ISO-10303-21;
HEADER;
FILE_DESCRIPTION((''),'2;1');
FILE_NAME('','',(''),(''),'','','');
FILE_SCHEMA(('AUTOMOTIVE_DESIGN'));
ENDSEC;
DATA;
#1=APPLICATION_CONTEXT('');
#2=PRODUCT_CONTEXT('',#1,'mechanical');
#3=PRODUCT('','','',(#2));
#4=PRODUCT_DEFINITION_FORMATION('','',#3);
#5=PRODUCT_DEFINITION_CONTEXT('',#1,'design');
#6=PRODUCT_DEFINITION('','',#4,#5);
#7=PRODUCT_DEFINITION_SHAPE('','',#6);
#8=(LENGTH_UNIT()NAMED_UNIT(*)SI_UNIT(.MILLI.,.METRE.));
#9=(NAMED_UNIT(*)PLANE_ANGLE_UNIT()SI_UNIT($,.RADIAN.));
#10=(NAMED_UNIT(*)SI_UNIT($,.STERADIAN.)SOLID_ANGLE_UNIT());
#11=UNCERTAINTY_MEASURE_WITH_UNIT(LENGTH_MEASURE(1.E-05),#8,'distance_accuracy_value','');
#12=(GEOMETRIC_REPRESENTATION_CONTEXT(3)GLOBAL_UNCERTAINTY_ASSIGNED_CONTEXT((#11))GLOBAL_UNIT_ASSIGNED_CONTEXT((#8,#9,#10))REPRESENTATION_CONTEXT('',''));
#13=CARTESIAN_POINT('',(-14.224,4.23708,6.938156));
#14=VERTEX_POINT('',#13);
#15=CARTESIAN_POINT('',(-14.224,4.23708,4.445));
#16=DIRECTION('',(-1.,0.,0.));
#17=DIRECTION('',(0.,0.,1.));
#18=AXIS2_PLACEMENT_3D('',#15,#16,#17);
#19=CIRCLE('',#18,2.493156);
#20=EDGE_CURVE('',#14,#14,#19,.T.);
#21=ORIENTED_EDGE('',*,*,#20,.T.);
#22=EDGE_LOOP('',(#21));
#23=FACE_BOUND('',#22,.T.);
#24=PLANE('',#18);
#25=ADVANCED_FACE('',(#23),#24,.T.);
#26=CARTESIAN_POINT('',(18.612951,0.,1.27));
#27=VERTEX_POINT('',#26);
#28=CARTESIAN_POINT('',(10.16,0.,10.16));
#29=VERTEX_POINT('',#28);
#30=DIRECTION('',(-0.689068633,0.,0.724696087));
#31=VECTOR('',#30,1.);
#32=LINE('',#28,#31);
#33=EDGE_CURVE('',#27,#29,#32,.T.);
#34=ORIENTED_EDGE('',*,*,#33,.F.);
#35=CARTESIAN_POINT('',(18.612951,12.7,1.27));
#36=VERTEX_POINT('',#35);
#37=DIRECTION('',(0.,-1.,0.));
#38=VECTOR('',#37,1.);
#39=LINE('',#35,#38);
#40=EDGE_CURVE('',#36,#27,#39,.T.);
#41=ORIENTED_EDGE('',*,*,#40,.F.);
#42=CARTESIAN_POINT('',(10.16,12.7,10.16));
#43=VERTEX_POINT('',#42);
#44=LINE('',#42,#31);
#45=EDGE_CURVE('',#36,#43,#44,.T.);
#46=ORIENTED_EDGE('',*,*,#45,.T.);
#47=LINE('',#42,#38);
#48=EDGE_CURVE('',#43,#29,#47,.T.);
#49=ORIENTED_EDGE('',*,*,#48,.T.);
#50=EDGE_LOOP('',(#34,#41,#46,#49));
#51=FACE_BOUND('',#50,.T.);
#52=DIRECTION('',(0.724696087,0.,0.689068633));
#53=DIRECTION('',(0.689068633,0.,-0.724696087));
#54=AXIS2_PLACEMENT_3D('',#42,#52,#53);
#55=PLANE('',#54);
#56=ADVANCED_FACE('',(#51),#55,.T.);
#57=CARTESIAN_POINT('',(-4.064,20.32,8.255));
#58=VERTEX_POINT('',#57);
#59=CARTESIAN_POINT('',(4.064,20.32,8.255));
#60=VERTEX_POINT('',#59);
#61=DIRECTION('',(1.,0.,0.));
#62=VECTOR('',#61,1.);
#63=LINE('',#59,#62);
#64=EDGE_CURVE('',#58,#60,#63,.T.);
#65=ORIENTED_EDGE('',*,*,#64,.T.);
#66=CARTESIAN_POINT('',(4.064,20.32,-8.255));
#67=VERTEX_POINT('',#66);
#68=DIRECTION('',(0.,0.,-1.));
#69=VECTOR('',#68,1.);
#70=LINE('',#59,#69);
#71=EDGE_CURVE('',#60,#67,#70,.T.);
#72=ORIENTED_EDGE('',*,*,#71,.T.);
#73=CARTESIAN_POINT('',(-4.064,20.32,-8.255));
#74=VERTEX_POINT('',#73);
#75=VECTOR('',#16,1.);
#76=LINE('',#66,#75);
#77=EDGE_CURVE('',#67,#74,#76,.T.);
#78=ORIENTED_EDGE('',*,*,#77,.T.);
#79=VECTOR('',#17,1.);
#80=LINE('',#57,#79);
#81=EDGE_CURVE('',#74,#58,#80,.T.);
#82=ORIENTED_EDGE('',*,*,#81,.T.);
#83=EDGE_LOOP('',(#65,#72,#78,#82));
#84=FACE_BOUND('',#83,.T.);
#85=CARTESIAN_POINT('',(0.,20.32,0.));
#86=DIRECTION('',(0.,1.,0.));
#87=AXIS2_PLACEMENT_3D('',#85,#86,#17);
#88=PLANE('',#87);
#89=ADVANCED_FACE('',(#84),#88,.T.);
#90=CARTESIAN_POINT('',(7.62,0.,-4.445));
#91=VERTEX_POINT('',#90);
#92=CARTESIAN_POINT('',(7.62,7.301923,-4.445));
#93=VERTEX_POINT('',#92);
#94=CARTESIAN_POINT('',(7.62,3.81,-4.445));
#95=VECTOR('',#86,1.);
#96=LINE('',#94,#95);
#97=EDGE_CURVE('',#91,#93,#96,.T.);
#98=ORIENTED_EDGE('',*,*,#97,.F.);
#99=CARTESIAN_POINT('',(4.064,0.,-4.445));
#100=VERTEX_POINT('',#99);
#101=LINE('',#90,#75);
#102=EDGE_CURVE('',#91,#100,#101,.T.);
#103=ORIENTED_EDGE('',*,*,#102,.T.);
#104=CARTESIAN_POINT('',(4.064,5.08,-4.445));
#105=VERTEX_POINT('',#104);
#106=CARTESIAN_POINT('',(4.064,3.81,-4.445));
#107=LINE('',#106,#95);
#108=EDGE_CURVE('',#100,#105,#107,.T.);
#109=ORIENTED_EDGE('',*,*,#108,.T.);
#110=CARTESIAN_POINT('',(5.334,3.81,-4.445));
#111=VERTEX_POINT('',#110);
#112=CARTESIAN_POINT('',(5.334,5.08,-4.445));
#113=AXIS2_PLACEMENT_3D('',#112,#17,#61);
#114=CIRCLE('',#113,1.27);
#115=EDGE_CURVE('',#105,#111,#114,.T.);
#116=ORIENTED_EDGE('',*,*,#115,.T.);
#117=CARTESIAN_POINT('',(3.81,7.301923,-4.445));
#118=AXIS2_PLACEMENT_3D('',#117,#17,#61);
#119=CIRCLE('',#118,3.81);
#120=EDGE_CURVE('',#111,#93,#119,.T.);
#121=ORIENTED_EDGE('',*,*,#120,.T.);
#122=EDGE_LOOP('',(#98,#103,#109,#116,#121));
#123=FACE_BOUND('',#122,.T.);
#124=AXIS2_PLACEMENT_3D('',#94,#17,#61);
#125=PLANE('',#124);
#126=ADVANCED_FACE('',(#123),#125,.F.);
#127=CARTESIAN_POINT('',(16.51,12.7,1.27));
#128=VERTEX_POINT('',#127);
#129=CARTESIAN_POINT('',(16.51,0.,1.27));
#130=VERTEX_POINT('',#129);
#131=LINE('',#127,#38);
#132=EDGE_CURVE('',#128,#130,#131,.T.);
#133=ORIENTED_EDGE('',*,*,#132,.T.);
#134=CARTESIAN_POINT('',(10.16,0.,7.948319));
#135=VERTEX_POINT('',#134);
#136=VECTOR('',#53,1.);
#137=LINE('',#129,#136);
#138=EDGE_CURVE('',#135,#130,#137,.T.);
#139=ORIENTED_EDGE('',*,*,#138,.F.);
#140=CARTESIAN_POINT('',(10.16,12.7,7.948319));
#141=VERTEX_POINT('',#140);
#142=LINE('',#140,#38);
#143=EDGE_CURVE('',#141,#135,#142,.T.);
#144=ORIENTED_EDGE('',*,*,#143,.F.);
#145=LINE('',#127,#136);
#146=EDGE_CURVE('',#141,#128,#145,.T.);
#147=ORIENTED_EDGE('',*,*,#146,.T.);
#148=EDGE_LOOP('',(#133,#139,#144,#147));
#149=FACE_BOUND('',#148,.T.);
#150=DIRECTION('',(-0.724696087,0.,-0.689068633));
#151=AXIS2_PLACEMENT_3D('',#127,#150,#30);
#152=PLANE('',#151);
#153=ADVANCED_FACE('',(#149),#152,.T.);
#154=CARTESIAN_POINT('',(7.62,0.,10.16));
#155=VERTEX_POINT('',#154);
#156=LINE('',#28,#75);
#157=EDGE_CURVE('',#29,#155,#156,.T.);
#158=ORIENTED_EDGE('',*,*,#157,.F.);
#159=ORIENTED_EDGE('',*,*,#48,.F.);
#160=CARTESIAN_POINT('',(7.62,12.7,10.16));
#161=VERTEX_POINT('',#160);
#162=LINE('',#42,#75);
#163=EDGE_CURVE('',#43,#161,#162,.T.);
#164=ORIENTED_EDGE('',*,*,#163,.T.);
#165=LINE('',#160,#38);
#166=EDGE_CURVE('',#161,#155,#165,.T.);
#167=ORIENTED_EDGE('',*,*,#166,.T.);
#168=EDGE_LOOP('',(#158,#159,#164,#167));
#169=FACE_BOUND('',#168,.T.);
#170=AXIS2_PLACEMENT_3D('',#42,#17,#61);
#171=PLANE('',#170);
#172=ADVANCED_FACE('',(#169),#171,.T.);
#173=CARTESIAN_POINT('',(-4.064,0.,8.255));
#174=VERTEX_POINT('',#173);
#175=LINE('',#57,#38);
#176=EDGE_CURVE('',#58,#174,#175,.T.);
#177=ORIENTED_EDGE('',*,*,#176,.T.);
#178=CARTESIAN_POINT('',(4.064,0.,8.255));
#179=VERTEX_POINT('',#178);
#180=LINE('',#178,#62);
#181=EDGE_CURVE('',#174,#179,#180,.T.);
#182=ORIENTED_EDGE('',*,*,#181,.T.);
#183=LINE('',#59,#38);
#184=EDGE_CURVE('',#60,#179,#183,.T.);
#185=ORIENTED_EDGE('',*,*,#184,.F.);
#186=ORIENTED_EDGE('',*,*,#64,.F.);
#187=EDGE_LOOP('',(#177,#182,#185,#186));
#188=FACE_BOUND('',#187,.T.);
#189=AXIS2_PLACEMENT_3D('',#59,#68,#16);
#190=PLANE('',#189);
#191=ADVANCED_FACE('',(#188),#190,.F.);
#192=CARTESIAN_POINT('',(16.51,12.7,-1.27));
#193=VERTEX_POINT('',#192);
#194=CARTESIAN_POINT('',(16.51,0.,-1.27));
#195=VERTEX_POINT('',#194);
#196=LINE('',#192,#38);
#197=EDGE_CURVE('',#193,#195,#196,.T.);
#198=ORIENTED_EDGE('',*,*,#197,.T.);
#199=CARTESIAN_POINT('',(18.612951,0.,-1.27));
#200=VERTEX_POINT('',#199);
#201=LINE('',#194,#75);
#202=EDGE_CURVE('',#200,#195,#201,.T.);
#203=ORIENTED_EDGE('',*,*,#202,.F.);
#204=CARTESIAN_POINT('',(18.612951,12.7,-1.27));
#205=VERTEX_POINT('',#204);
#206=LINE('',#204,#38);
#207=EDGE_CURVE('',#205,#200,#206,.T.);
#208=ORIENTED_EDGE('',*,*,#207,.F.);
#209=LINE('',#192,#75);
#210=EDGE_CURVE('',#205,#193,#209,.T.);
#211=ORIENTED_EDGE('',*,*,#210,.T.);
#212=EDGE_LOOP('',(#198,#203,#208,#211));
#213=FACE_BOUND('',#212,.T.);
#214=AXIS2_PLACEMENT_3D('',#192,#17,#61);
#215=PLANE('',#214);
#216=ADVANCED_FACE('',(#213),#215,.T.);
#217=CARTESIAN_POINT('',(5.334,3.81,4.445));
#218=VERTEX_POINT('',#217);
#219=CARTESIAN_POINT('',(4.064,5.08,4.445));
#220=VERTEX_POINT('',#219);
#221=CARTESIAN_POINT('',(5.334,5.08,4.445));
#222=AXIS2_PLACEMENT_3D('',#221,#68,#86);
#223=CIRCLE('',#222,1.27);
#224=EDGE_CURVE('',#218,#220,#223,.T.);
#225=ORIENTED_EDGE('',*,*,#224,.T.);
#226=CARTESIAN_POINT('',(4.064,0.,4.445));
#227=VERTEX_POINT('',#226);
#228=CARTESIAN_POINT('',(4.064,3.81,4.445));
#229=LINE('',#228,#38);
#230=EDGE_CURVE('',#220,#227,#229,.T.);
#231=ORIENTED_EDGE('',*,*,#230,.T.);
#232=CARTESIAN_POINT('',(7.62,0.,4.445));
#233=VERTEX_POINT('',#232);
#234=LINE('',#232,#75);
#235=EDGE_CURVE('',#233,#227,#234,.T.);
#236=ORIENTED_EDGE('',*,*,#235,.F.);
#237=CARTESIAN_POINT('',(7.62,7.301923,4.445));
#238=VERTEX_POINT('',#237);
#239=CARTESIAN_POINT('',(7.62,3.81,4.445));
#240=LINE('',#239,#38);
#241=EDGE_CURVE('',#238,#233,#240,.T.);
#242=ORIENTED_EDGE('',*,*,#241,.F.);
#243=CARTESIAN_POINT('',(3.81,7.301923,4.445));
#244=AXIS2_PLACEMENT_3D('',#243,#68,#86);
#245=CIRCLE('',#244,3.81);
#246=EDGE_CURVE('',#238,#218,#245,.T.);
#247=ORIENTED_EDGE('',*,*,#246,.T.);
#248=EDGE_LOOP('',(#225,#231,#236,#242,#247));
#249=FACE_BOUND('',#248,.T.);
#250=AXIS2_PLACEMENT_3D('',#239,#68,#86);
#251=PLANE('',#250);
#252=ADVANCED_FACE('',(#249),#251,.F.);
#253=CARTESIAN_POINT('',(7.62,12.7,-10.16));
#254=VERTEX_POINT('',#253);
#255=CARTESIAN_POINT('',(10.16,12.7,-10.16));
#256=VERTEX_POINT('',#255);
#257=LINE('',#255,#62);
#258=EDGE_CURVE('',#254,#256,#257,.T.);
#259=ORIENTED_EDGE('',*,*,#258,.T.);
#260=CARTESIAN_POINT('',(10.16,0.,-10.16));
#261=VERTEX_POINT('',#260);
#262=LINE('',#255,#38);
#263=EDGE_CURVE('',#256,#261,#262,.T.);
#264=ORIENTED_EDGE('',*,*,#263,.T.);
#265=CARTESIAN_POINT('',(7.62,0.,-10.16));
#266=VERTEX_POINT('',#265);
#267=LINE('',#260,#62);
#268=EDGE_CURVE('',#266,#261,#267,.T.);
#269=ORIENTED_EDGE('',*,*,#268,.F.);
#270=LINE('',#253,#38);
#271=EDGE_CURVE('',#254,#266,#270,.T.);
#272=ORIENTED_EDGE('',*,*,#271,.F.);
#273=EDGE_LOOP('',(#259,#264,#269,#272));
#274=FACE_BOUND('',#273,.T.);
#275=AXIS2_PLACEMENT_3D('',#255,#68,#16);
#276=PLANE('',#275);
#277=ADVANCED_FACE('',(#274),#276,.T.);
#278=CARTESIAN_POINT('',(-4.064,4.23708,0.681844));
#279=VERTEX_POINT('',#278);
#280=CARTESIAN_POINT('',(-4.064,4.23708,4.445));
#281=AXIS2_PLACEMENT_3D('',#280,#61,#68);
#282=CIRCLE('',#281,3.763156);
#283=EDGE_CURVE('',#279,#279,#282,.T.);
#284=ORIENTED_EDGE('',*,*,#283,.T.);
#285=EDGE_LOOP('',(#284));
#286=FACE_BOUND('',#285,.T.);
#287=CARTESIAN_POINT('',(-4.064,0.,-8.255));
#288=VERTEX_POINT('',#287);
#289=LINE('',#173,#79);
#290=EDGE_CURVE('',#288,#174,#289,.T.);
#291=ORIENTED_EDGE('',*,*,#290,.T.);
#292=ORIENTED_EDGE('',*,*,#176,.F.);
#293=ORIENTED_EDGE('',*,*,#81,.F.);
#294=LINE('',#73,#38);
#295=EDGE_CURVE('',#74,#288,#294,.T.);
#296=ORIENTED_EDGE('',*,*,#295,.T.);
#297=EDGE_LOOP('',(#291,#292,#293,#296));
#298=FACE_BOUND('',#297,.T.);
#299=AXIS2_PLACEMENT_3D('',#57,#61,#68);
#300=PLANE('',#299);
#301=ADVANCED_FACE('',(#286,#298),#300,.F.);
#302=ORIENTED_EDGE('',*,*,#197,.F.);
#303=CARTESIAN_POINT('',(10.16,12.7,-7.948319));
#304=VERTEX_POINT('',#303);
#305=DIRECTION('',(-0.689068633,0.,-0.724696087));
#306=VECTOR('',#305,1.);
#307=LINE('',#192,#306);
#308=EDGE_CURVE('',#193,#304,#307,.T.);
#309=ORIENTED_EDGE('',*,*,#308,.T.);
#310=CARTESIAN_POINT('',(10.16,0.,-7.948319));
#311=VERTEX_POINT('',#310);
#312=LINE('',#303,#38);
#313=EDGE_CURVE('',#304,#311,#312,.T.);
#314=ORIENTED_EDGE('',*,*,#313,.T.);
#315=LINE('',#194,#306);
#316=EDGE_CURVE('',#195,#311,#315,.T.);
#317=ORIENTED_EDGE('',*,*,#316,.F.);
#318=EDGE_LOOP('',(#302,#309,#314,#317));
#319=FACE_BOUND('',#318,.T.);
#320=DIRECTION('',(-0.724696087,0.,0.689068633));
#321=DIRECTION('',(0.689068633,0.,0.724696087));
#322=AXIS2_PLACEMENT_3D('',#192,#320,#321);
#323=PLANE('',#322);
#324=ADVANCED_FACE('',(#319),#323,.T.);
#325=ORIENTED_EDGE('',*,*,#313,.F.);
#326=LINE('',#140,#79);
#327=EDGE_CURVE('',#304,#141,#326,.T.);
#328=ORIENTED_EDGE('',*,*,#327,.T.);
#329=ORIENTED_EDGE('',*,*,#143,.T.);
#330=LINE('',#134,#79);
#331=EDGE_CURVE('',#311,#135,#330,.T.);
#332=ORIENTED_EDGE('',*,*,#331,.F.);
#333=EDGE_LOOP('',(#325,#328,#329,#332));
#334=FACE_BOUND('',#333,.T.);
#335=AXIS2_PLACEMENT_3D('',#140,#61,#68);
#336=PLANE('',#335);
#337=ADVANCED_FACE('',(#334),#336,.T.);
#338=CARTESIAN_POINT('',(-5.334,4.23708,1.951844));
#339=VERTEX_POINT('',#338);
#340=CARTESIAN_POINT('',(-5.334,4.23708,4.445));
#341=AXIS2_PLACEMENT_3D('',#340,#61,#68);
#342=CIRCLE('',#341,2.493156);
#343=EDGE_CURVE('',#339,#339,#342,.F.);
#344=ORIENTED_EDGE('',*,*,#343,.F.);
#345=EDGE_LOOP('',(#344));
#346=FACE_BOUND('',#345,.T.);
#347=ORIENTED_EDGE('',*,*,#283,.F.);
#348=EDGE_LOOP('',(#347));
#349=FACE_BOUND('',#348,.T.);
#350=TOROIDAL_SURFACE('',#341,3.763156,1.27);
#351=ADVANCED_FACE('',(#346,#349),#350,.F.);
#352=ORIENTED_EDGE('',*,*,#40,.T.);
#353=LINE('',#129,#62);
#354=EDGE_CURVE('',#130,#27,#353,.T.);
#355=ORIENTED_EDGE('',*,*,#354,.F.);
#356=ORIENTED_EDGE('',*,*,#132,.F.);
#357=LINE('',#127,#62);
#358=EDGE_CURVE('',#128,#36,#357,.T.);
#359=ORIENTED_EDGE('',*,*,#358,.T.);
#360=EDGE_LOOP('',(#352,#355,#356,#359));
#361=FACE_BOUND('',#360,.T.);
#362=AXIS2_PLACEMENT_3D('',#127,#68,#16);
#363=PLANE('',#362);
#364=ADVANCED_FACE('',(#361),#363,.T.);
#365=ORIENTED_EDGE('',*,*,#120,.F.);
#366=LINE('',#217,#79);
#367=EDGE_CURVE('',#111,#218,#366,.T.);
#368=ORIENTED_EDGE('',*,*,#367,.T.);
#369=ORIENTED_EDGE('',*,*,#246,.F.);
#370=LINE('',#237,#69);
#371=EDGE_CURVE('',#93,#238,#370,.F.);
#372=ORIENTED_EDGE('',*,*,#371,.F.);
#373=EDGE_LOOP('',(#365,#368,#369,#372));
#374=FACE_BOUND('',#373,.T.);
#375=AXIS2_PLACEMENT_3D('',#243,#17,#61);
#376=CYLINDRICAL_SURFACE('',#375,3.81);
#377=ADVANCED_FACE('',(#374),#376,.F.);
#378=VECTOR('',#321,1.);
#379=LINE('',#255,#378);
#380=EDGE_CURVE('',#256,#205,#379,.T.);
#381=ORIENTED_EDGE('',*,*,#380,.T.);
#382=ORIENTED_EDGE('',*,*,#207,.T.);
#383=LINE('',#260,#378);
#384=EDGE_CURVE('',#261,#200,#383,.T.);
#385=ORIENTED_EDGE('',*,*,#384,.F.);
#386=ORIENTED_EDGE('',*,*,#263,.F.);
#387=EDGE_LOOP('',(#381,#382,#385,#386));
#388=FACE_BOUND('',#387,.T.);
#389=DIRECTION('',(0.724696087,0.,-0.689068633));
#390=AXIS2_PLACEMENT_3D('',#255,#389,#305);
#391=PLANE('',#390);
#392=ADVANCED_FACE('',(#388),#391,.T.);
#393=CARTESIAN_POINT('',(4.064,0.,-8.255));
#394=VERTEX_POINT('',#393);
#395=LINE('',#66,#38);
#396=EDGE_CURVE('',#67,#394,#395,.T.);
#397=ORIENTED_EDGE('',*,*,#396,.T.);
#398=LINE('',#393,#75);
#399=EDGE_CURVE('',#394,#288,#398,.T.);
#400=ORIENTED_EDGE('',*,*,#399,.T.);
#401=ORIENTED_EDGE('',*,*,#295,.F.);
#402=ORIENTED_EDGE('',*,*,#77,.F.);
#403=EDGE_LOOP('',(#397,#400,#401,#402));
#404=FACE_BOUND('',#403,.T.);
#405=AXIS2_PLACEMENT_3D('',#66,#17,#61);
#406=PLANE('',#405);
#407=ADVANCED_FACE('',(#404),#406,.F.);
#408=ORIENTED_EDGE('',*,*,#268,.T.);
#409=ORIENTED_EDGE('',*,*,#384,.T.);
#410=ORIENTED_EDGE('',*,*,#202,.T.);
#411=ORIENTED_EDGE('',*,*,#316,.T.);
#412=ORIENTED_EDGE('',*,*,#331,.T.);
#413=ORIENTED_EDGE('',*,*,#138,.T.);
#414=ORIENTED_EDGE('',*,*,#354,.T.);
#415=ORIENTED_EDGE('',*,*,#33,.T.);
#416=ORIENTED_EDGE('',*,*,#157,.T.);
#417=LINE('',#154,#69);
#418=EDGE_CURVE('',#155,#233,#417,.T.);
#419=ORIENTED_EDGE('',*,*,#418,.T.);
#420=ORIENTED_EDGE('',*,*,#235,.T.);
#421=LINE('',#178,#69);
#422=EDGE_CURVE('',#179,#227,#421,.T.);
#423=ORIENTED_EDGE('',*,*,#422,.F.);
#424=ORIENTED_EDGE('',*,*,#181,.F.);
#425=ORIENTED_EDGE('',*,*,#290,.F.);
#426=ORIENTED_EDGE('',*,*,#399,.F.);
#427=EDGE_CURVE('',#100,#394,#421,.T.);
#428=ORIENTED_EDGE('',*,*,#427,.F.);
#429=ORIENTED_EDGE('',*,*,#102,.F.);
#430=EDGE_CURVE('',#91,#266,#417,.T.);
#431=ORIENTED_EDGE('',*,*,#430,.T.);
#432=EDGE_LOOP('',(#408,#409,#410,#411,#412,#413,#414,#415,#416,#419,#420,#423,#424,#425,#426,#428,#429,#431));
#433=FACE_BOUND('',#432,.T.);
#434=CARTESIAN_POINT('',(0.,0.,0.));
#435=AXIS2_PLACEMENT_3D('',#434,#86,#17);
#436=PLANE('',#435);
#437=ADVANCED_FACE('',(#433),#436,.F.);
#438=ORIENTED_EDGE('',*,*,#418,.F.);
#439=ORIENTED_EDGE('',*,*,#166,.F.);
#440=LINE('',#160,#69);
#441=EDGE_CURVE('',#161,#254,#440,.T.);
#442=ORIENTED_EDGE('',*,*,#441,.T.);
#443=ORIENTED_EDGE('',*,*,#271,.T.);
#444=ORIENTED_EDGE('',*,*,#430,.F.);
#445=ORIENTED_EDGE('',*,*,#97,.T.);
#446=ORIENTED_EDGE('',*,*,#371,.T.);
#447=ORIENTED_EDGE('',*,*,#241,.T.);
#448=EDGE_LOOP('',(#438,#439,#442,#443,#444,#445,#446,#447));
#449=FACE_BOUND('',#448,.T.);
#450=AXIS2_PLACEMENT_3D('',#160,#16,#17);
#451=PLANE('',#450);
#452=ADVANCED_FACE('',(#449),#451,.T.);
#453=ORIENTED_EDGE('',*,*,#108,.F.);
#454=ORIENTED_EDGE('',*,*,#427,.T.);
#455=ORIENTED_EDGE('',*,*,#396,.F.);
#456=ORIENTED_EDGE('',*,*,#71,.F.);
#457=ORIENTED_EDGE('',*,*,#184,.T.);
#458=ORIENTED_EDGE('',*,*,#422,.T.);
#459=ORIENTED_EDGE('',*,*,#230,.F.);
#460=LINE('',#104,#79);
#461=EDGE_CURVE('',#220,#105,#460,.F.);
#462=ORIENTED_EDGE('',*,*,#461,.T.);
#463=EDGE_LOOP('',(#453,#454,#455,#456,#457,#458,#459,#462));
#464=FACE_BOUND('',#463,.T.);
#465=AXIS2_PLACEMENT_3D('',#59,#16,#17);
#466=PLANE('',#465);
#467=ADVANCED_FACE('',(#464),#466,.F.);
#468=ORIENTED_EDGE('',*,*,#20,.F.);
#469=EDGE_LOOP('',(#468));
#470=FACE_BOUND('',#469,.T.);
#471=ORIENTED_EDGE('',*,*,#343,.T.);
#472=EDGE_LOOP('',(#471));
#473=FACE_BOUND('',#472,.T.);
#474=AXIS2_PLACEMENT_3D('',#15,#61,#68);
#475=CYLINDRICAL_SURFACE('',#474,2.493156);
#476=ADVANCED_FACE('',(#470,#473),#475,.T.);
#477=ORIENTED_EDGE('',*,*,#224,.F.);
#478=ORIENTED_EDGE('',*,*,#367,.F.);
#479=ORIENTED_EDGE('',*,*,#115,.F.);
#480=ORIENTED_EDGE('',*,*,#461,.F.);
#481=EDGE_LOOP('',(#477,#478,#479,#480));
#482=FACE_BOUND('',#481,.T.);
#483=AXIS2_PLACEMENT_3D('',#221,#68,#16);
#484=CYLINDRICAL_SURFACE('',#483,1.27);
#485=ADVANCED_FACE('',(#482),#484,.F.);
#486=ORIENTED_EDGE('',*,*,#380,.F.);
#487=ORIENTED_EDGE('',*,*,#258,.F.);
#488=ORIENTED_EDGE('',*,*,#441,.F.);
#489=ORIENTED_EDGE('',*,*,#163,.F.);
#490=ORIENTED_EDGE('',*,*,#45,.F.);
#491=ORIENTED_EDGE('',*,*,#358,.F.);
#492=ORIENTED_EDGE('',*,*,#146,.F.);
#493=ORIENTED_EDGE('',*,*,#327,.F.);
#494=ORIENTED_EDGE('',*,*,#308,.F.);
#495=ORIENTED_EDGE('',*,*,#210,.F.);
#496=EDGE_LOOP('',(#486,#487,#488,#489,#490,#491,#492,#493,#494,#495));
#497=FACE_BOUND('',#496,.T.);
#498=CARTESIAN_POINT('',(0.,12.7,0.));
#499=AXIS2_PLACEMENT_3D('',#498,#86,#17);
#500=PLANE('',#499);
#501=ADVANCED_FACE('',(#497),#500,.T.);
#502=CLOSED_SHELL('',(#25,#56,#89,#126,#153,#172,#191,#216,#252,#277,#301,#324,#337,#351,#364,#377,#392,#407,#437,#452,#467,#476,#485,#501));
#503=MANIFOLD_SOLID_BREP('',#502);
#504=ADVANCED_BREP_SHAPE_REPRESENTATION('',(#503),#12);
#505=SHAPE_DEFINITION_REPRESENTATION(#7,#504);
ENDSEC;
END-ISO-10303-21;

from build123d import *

# Parameters (mm, degrees)
SKETCH1_W           = 8.128
SKETCH1_H           = 16.51
BOSS_EXTRUDE1_DEPTH = 20.32
SKETCH2_R           = 2.493155922
BOSS_EXTRUDE2_DEPTH = 10.16
FILLET2_R           = 1.27
SKETCH3_W           = 8.89
SKETCH3_H           = 3.81
BOSS_EXTRUDE3_DEPTH = 3.556
FILLET3_R           = 1.27
BOSS_EXTRUDE4_DEPTH = 12.7
FILLET4_R           = 3.81


with BuildPart() as part:
    # Sketch1 → Boss-Extrude1 (new body)
    with BuildSketch(Plane(origin=(0, 0, 0), x_dir=(1, 0, 0), z_dir=(0, 1, 0))):
        Rectangle(SKETCH1_W, SKETCH1_H)
    extrude(amount=BOSS_EXTRUDE1_DEPTH)

    # Sketch2 → Boss-Extrude2 (add)
    with BuildSketch(Plane.ZY.offset(4.064)):
        with Locations(Location((4.445, 4.237080477, 0), (0, 0, 180))):
            Circle(SKETCH2_R)
    extrude(amount=BOSS_EXTRUDE2_DEPTH)

    # Fillet2
    fillet2_edges = [part.edges().sort_by_distance(p)[0] for p in [
        (-4.064, 4.237080477, 6.938155922),
    ]]
    fillet(fillet2_edges, radius=FILLET2_R)

    # Sketch3 → Boss-Extrude3 (add)
    with BuildSketch(Plane(origin=(4.064, 0, 0), x_dir=(0, 0, -1), z_dir=(1, 0, 0))):
        with Locations((0, 1.905)):
            Rectangle(SKETCH3_W, SKETCH3_H)
    extrude(amount=BOSS_EXTRUDE3_DEPTH)

    # Fillet3
    fillet3_edges = [part.edges().sort_by_distance(p)[0] for p in [
        (4.064, 3.81, 0),
    ]]
    fillet(fillet3_edges, radius=FILLET3_R)

    # Sketch5 → Boss-Extrude4 (add)
    with BuildSketch(Plane(origin=(0, 0, 0), x_dir=(-1, 0, 0), z_dir=(0, -1, 0))):
        Polygon((-10.16, -10.16), (-7.62, -10.16), (-7.62, 10.16), (-10.16, 10.16), (-18.612950502, 1.27), (-16.51, 1.27), (-10.16, 7.948319006), (-10.16, -7.948319006), (-16.51, -1.27), (-18.612950502, -1.27), align=None)
    extrude(amount=-BOSS_EXTRUDE4_DEPTH)

    # Fillet4
    # the kernel refuses this fillet: 3.81 mm, written as the material it adds along each edge
    with BuildSketch(Plane(origin=(7.62, 3.81, 4.445), x_dir=(0, 1, 0), z_dir=(0, 0, -1))) as fillet4_piece_1:
        with BuildLine():
            CenterArc((3.49192268, -3.81), FILLET4_R, 90, 66.421821522)
            Line((0, -2.286), (0, 0))
            Line((0, 0), (3.49192268, 0))
        make_face()
    extrude(amount=8.89)


solid = part.part
